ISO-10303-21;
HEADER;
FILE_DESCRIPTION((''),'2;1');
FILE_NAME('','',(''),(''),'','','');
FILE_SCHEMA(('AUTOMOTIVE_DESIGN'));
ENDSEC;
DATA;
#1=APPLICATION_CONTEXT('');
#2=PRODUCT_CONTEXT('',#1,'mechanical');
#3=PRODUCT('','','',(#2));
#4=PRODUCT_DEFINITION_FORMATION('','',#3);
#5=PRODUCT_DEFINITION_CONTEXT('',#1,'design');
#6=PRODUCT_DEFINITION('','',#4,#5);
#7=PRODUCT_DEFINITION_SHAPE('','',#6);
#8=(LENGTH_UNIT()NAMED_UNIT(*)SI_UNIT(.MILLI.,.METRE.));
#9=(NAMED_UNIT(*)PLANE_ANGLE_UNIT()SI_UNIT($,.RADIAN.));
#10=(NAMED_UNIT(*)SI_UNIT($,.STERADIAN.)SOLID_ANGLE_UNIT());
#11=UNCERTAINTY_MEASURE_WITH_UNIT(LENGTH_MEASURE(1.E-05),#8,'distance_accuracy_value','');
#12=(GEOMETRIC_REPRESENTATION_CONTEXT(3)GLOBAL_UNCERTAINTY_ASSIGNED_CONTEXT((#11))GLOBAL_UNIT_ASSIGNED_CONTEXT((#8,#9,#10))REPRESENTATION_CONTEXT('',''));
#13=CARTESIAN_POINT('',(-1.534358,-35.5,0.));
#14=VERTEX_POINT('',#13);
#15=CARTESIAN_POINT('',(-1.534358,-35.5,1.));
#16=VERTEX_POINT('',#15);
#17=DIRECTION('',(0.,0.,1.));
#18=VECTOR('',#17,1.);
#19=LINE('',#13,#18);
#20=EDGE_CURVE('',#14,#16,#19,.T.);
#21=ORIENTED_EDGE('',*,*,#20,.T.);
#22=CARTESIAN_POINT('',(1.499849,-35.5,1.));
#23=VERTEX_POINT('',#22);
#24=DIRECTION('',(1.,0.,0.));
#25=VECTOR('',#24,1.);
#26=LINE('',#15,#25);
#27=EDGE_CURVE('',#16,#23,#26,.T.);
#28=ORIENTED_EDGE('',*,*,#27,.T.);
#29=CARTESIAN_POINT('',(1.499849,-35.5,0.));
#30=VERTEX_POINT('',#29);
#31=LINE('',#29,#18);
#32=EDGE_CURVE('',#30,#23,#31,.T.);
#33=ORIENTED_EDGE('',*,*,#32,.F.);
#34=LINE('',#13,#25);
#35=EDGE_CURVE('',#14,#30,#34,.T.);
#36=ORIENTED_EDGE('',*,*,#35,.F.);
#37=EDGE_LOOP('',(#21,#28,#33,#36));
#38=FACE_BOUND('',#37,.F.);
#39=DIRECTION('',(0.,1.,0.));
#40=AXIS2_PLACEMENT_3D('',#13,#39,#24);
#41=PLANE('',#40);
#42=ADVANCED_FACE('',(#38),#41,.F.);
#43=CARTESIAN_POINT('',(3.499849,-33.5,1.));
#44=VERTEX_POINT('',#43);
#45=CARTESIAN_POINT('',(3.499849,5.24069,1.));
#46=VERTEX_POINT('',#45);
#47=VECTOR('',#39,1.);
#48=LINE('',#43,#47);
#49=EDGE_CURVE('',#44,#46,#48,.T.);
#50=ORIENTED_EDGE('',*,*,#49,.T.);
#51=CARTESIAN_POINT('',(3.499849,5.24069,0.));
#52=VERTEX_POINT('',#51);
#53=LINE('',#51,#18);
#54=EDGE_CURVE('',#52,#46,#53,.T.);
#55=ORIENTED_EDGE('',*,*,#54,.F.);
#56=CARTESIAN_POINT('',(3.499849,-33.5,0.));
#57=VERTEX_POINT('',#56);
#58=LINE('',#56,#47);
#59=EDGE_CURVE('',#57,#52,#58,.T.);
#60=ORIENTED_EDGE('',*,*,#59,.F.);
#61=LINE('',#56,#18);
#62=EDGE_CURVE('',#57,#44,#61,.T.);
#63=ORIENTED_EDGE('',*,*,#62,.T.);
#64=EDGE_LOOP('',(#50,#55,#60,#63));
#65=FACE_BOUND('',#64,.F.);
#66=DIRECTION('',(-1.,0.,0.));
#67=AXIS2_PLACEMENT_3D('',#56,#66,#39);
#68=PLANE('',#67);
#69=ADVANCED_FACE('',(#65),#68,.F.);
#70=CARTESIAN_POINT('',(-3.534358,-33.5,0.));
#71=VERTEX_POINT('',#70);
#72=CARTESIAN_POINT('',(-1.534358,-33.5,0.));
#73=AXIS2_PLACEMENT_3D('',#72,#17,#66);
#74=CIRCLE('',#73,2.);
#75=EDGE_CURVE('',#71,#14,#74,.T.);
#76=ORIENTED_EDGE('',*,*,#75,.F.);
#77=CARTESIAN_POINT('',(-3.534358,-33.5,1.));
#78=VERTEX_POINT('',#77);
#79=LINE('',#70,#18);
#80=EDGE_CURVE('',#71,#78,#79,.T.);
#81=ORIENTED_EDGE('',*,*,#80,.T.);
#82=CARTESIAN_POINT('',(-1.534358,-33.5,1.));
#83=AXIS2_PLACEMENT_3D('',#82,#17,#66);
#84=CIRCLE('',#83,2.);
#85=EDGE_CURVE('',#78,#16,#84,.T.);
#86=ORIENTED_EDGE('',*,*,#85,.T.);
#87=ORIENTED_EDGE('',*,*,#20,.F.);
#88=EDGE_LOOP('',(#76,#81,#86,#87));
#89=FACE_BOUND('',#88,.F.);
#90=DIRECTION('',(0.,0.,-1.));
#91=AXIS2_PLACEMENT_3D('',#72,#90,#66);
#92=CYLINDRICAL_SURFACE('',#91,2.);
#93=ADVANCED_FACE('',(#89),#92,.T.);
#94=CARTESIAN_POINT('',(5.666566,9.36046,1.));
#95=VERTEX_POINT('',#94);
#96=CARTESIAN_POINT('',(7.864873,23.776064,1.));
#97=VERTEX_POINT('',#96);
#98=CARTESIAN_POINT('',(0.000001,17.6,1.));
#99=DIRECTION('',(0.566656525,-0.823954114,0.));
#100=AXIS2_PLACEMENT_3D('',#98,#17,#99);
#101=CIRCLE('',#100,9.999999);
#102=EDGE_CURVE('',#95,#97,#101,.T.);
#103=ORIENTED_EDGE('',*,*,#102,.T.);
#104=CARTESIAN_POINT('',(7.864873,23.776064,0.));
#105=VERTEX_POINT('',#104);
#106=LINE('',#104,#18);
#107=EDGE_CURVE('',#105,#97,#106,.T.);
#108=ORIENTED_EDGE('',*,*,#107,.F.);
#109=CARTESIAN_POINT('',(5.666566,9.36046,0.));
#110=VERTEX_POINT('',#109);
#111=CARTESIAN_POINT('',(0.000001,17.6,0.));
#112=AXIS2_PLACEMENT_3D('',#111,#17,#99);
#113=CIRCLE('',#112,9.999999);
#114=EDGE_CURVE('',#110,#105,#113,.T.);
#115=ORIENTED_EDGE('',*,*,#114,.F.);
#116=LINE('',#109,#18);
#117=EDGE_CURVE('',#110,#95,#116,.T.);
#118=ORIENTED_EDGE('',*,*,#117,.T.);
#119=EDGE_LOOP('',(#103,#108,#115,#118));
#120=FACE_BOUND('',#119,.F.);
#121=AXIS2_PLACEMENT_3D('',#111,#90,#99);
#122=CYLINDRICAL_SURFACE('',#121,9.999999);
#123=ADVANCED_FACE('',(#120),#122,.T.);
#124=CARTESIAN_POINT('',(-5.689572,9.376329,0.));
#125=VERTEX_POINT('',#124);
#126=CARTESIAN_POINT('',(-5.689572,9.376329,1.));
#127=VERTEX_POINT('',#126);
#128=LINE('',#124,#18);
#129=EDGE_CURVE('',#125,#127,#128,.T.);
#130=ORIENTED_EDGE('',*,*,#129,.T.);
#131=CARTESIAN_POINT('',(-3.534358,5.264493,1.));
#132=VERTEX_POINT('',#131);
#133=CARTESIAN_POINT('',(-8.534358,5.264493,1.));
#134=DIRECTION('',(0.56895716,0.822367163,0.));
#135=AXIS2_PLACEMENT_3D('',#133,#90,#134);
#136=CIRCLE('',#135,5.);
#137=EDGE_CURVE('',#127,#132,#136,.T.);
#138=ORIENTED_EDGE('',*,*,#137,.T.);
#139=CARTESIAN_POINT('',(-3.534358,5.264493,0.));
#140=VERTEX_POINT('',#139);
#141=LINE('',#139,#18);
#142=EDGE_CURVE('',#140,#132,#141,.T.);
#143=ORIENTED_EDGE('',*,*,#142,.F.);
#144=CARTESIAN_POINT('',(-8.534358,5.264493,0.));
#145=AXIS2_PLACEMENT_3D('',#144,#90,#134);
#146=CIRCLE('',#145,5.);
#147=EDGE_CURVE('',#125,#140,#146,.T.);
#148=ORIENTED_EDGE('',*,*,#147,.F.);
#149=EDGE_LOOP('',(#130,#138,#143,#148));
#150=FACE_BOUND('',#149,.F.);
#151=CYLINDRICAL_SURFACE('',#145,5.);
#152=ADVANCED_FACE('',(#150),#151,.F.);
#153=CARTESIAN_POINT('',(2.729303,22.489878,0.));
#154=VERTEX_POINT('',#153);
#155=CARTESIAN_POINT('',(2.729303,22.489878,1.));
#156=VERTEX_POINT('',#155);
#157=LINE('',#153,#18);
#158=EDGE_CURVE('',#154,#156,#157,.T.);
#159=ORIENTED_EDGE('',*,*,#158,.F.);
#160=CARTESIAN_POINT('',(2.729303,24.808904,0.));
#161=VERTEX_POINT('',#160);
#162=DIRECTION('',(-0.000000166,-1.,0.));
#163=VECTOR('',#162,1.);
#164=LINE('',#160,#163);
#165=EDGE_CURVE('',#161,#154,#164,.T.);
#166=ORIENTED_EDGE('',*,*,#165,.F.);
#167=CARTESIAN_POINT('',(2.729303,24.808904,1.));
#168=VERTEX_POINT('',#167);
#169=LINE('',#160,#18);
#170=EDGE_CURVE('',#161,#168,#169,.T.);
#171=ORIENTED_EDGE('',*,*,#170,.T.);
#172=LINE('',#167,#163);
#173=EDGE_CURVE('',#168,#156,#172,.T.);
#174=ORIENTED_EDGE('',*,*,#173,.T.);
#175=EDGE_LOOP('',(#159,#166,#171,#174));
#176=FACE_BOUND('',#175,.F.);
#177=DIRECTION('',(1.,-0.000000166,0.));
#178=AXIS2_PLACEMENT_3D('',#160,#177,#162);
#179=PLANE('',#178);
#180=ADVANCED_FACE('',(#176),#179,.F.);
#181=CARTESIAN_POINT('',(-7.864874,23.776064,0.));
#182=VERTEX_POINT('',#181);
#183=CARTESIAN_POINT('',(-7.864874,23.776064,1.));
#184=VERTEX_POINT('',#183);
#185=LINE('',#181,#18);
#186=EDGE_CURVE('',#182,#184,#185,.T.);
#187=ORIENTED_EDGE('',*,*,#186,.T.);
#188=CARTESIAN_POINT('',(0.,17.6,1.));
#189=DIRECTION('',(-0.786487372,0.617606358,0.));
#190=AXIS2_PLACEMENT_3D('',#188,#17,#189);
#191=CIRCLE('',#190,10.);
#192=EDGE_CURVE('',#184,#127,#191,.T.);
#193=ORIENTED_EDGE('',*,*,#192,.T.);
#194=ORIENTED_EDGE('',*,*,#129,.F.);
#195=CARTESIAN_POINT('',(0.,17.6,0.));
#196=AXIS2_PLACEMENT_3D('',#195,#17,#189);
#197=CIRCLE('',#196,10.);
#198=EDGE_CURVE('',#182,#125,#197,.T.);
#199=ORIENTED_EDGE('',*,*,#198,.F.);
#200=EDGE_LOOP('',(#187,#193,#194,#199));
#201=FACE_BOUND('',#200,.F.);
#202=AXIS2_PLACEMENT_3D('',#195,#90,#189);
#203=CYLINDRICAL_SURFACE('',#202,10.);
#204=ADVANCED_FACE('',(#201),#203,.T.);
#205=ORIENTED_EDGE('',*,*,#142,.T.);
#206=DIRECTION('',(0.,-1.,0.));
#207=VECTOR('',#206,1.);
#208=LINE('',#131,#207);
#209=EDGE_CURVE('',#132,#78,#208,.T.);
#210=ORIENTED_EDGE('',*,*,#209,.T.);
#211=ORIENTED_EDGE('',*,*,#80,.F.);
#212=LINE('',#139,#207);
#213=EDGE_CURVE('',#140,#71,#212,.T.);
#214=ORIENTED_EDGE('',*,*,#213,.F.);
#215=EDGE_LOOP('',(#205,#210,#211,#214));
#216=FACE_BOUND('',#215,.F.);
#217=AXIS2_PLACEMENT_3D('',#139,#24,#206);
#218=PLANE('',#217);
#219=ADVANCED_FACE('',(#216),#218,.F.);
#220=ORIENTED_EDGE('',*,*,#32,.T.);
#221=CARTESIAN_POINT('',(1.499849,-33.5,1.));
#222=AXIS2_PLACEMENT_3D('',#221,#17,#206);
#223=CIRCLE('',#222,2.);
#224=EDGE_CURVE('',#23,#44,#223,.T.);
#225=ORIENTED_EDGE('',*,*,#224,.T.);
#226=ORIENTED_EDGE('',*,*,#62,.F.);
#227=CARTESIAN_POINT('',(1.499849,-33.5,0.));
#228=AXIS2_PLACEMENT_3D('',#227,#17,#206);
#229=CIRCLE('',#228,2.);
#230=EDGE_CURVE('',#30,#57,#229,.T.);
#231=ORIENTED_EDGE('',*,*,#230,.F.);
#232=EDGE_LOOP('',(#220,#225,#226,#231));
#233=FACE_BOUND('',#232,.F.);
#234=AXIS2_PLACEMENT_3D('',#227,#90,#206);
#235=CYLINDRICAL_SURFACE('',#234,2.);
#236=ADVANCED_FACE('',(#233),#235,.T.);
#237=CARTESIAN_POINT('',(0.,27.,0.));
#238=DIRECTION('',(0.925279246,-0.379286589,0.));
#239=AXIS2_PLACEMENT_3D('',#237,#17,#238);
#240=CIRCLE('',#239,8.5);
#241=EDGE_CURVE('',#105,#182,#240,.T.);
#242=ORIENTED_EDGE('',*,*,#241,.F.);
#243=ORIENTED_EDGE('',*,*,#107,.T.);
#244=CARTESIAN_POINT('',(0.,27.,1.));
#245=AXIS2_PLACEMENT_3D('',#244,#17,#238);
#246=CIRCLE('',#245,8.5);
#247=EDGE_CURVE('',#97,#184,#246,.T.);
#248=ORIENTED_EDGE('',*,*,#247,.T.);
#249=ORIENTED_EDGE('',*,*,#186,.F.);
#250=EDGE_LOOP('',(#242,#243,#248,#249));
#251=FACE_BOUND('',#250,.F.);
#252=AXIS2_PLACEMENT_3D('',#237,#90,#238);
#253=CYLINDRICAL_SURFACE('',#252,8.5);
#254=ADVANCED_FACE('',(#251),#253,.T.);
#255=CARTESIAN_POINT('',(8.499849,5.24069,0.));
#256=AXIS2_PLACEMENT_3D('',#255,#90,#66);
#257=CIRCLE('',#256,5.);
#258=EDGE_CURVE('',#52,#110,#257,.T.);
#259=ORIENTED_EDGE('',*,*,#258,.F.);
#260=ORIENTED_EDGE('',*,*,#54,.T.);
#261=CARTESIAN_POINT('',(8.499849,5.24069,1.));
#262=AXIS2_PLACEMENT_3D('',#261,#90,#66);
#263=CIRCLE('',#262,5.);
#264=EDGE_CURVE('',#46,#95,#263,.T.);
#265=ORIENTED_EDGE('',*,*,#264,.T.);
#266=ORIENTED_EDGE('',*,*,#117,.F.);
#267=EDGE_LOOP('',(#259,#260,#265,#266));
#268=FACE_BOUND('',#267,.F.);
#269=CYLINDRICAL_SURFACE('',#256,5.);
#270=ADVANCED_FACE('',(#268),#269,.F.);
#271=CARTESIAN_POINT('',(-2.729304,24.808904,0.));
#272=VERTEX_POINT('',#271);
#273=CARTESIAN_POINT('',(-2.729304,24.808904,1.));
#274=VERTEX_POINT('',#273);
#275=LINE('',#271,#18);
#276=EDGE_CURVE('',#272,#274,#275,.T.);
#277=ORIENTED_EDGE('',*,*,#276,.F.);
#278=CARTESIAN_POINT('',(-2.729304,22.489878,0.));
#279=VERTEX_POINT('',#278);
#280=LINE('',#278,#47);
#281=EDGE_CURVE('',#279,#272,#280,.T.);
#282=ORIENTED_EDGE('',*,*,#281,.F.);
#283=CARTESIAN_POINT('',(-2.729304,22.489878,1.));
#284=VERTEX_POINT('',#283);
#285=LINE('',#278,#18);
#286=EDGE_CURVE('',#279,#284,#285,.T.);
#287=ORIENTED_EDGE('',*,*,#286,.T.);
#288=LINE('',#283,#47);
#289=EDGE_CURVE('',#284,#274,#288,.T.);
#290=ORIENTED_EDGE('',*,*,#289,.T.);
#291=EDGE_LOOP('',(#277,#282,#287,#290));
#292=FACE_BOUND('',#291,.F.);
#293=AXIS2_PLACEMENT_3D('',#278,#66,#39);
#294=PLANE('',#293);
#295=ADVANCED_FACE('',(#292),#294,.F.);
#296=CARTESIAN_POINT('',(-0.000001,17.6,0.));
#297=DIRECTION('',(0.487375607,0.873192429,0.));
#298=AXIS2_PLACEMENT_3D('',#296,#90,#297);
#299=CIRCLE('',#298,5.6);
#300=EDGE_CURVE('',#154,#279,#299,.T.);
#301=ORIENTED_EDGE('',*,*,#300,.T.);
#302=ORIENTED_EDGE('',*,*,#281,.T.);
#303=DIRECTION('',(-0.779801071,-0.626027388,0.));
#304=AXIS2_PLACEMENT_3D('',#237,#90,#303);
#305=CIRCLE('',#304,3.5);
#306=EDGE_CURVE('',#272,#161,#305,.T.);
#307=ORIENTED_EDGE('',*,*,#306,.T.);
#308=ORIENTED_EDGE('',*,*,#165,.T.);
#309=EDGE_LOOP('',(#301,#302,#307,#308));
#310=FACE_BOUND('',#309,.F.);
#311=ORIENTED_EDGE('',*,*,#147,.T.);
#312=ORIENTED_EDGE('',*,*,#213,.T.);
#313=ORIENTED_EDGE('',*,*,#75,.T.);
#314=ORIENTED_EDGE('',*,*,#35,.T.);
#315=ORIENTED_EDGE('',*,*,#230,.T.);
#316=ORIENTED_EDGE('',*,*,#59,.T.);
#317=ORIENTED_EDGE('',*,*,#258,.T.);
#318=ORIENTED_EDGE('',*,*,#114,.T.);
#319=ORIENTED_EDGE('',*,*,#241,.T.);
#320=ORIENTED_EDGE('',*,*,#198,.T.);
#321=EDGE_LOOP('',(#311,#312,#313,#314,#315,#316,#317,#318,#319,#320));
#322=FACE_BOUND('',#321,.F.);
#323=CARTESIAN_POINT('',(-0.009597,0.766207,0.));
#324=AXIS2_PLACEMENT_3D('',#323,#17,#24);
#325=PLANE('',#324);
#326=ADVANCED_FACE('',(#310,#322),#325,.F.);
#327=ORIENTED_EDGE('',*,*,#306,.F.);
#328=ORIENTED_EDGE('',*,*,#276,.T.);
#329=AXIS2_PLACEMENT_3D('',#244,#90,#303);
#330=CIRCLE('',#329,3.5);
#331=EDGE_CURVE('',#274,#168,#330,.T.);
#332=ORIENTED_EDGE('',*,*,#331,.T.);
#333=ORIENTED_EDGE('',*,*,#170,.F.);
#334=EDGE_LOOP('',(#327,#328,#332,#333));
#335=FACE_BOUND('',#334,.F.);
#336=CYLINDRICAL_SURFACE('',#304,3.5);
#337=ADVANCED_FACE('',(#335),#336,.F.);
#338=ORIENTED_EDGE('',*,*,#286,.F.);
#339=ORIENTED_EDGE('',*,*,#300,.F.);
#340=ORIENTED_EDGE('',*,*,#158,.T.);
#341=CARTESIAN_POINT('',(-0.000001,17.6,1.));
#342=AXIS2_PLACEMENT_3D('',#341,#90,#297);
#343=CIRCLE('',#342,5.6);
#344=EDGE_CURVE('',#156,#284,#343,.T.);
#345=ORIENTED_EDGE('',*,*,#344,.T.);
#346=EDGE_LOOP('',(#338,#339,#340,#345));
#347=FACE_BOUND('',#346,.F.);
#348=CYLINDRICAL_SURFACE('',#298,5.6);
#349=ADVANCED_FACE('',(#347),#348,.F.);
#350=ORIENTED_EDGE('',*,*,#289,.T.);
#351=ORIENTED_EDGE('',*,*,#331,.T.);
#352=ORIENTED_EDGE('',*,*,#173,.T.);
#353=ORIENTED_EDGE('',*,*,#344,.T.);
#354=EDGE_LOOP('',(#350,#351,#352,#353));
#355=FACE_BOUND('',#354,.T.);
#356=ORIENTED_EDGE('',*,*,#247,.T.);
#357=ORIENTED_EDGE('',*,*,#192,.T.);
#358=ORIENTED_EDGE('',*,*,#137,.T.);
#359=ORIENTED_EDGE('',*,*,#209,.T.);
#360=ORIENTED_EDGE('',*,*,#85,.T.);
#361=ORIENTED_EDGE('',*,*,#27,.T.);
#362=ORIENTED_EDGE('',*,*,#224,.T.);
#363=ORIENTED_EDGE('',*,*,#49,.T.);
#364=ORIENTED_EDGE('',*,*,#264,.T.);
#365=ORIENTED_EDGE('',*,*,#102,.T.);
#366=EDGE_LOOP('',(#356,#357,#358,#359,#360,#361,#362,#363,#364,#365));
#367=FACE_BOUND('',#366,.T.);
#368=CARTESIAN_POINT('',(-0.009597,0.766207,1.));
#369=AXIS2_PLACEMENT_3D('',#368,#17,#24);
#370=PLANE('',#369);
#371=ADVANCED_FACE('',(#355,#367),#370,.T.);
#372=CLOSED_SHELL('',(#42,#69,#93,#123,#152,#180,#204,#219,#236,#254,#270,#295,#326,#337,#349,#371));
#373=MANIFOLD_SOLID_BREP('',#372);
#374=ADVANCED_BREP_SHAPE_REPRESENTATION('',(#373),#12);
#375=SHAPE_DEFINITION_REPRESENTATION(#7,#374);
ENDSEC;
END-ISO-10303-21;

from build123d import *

# Parameters (mm, degrees)
F2_DEPTH = 1


# Not quite as in the source:
# - ends of sketch curves that miss each other by under 0.0002 mm in the source are joined


with BuildPart() as f2:
    # F1 (on Top) → F2 (new body)
    with BuildSketch(Plane.XY):
        with BuildLine():
            Line((-1.534358, -35.5), (1.499849, -35.5))
            ThreePointArc((1.499849, -35.5), (2.9140625624, -34.9142135624), (3.499849, -33.5))
            Line((3.499849, -33.5), (3.499849, 5.24069))
            ThreePointArc((3.499849, 5.24069), (4.0745571603, 7.568090295), (5.6665658533, 9.3604602133))
            ThreePointArc((5.6665658533, 9.3604602133), (9.8857158615, 16.0924782241), (7.8648732423, 23.7760641903))
            ThreePointArc((7.8648732423, 23.7760641903), (1.896e-07, 35.5), (-7.8648736534, 23.7760641421))
            ThreePointArc((-7.8648736534, 23.7760641421), (-9.8878127884, 16.1062937833), (-5.6895721633, 9.376328764))
            ThreePointArc((-5.6895721633, 9.376328764), (-4.1058182159, 7.585707204), (-3.534358, 5.264493))
            Line((-3.534358, 5.264493), (-3.534358, -33.5))
            ThreePointArc((-3.534358, -33.5), (-2.9485715624, -34.9142135624), (-1.534358, -35.5))
        make_face()
        with BuildLine():
            Line((-2.729304, 22.489878), (-2.729304, 24.808904))
            ThreePointArc((-2.729304, 24.808904), (3.13e-07, 30.5), (2.7293033847, 24.8089036912))
            Line((2.7293033847, 24.8089036912), (2.729303, 22.489878))
            ThreePointArc((2.729303, 22.489878), (4.366e-07, 12), (-2.729304, 22.489878))
        make_face(mode=Mode.SUBTRACT)
    extrude(amount=F2_DEPTH)


solid = f2.part
